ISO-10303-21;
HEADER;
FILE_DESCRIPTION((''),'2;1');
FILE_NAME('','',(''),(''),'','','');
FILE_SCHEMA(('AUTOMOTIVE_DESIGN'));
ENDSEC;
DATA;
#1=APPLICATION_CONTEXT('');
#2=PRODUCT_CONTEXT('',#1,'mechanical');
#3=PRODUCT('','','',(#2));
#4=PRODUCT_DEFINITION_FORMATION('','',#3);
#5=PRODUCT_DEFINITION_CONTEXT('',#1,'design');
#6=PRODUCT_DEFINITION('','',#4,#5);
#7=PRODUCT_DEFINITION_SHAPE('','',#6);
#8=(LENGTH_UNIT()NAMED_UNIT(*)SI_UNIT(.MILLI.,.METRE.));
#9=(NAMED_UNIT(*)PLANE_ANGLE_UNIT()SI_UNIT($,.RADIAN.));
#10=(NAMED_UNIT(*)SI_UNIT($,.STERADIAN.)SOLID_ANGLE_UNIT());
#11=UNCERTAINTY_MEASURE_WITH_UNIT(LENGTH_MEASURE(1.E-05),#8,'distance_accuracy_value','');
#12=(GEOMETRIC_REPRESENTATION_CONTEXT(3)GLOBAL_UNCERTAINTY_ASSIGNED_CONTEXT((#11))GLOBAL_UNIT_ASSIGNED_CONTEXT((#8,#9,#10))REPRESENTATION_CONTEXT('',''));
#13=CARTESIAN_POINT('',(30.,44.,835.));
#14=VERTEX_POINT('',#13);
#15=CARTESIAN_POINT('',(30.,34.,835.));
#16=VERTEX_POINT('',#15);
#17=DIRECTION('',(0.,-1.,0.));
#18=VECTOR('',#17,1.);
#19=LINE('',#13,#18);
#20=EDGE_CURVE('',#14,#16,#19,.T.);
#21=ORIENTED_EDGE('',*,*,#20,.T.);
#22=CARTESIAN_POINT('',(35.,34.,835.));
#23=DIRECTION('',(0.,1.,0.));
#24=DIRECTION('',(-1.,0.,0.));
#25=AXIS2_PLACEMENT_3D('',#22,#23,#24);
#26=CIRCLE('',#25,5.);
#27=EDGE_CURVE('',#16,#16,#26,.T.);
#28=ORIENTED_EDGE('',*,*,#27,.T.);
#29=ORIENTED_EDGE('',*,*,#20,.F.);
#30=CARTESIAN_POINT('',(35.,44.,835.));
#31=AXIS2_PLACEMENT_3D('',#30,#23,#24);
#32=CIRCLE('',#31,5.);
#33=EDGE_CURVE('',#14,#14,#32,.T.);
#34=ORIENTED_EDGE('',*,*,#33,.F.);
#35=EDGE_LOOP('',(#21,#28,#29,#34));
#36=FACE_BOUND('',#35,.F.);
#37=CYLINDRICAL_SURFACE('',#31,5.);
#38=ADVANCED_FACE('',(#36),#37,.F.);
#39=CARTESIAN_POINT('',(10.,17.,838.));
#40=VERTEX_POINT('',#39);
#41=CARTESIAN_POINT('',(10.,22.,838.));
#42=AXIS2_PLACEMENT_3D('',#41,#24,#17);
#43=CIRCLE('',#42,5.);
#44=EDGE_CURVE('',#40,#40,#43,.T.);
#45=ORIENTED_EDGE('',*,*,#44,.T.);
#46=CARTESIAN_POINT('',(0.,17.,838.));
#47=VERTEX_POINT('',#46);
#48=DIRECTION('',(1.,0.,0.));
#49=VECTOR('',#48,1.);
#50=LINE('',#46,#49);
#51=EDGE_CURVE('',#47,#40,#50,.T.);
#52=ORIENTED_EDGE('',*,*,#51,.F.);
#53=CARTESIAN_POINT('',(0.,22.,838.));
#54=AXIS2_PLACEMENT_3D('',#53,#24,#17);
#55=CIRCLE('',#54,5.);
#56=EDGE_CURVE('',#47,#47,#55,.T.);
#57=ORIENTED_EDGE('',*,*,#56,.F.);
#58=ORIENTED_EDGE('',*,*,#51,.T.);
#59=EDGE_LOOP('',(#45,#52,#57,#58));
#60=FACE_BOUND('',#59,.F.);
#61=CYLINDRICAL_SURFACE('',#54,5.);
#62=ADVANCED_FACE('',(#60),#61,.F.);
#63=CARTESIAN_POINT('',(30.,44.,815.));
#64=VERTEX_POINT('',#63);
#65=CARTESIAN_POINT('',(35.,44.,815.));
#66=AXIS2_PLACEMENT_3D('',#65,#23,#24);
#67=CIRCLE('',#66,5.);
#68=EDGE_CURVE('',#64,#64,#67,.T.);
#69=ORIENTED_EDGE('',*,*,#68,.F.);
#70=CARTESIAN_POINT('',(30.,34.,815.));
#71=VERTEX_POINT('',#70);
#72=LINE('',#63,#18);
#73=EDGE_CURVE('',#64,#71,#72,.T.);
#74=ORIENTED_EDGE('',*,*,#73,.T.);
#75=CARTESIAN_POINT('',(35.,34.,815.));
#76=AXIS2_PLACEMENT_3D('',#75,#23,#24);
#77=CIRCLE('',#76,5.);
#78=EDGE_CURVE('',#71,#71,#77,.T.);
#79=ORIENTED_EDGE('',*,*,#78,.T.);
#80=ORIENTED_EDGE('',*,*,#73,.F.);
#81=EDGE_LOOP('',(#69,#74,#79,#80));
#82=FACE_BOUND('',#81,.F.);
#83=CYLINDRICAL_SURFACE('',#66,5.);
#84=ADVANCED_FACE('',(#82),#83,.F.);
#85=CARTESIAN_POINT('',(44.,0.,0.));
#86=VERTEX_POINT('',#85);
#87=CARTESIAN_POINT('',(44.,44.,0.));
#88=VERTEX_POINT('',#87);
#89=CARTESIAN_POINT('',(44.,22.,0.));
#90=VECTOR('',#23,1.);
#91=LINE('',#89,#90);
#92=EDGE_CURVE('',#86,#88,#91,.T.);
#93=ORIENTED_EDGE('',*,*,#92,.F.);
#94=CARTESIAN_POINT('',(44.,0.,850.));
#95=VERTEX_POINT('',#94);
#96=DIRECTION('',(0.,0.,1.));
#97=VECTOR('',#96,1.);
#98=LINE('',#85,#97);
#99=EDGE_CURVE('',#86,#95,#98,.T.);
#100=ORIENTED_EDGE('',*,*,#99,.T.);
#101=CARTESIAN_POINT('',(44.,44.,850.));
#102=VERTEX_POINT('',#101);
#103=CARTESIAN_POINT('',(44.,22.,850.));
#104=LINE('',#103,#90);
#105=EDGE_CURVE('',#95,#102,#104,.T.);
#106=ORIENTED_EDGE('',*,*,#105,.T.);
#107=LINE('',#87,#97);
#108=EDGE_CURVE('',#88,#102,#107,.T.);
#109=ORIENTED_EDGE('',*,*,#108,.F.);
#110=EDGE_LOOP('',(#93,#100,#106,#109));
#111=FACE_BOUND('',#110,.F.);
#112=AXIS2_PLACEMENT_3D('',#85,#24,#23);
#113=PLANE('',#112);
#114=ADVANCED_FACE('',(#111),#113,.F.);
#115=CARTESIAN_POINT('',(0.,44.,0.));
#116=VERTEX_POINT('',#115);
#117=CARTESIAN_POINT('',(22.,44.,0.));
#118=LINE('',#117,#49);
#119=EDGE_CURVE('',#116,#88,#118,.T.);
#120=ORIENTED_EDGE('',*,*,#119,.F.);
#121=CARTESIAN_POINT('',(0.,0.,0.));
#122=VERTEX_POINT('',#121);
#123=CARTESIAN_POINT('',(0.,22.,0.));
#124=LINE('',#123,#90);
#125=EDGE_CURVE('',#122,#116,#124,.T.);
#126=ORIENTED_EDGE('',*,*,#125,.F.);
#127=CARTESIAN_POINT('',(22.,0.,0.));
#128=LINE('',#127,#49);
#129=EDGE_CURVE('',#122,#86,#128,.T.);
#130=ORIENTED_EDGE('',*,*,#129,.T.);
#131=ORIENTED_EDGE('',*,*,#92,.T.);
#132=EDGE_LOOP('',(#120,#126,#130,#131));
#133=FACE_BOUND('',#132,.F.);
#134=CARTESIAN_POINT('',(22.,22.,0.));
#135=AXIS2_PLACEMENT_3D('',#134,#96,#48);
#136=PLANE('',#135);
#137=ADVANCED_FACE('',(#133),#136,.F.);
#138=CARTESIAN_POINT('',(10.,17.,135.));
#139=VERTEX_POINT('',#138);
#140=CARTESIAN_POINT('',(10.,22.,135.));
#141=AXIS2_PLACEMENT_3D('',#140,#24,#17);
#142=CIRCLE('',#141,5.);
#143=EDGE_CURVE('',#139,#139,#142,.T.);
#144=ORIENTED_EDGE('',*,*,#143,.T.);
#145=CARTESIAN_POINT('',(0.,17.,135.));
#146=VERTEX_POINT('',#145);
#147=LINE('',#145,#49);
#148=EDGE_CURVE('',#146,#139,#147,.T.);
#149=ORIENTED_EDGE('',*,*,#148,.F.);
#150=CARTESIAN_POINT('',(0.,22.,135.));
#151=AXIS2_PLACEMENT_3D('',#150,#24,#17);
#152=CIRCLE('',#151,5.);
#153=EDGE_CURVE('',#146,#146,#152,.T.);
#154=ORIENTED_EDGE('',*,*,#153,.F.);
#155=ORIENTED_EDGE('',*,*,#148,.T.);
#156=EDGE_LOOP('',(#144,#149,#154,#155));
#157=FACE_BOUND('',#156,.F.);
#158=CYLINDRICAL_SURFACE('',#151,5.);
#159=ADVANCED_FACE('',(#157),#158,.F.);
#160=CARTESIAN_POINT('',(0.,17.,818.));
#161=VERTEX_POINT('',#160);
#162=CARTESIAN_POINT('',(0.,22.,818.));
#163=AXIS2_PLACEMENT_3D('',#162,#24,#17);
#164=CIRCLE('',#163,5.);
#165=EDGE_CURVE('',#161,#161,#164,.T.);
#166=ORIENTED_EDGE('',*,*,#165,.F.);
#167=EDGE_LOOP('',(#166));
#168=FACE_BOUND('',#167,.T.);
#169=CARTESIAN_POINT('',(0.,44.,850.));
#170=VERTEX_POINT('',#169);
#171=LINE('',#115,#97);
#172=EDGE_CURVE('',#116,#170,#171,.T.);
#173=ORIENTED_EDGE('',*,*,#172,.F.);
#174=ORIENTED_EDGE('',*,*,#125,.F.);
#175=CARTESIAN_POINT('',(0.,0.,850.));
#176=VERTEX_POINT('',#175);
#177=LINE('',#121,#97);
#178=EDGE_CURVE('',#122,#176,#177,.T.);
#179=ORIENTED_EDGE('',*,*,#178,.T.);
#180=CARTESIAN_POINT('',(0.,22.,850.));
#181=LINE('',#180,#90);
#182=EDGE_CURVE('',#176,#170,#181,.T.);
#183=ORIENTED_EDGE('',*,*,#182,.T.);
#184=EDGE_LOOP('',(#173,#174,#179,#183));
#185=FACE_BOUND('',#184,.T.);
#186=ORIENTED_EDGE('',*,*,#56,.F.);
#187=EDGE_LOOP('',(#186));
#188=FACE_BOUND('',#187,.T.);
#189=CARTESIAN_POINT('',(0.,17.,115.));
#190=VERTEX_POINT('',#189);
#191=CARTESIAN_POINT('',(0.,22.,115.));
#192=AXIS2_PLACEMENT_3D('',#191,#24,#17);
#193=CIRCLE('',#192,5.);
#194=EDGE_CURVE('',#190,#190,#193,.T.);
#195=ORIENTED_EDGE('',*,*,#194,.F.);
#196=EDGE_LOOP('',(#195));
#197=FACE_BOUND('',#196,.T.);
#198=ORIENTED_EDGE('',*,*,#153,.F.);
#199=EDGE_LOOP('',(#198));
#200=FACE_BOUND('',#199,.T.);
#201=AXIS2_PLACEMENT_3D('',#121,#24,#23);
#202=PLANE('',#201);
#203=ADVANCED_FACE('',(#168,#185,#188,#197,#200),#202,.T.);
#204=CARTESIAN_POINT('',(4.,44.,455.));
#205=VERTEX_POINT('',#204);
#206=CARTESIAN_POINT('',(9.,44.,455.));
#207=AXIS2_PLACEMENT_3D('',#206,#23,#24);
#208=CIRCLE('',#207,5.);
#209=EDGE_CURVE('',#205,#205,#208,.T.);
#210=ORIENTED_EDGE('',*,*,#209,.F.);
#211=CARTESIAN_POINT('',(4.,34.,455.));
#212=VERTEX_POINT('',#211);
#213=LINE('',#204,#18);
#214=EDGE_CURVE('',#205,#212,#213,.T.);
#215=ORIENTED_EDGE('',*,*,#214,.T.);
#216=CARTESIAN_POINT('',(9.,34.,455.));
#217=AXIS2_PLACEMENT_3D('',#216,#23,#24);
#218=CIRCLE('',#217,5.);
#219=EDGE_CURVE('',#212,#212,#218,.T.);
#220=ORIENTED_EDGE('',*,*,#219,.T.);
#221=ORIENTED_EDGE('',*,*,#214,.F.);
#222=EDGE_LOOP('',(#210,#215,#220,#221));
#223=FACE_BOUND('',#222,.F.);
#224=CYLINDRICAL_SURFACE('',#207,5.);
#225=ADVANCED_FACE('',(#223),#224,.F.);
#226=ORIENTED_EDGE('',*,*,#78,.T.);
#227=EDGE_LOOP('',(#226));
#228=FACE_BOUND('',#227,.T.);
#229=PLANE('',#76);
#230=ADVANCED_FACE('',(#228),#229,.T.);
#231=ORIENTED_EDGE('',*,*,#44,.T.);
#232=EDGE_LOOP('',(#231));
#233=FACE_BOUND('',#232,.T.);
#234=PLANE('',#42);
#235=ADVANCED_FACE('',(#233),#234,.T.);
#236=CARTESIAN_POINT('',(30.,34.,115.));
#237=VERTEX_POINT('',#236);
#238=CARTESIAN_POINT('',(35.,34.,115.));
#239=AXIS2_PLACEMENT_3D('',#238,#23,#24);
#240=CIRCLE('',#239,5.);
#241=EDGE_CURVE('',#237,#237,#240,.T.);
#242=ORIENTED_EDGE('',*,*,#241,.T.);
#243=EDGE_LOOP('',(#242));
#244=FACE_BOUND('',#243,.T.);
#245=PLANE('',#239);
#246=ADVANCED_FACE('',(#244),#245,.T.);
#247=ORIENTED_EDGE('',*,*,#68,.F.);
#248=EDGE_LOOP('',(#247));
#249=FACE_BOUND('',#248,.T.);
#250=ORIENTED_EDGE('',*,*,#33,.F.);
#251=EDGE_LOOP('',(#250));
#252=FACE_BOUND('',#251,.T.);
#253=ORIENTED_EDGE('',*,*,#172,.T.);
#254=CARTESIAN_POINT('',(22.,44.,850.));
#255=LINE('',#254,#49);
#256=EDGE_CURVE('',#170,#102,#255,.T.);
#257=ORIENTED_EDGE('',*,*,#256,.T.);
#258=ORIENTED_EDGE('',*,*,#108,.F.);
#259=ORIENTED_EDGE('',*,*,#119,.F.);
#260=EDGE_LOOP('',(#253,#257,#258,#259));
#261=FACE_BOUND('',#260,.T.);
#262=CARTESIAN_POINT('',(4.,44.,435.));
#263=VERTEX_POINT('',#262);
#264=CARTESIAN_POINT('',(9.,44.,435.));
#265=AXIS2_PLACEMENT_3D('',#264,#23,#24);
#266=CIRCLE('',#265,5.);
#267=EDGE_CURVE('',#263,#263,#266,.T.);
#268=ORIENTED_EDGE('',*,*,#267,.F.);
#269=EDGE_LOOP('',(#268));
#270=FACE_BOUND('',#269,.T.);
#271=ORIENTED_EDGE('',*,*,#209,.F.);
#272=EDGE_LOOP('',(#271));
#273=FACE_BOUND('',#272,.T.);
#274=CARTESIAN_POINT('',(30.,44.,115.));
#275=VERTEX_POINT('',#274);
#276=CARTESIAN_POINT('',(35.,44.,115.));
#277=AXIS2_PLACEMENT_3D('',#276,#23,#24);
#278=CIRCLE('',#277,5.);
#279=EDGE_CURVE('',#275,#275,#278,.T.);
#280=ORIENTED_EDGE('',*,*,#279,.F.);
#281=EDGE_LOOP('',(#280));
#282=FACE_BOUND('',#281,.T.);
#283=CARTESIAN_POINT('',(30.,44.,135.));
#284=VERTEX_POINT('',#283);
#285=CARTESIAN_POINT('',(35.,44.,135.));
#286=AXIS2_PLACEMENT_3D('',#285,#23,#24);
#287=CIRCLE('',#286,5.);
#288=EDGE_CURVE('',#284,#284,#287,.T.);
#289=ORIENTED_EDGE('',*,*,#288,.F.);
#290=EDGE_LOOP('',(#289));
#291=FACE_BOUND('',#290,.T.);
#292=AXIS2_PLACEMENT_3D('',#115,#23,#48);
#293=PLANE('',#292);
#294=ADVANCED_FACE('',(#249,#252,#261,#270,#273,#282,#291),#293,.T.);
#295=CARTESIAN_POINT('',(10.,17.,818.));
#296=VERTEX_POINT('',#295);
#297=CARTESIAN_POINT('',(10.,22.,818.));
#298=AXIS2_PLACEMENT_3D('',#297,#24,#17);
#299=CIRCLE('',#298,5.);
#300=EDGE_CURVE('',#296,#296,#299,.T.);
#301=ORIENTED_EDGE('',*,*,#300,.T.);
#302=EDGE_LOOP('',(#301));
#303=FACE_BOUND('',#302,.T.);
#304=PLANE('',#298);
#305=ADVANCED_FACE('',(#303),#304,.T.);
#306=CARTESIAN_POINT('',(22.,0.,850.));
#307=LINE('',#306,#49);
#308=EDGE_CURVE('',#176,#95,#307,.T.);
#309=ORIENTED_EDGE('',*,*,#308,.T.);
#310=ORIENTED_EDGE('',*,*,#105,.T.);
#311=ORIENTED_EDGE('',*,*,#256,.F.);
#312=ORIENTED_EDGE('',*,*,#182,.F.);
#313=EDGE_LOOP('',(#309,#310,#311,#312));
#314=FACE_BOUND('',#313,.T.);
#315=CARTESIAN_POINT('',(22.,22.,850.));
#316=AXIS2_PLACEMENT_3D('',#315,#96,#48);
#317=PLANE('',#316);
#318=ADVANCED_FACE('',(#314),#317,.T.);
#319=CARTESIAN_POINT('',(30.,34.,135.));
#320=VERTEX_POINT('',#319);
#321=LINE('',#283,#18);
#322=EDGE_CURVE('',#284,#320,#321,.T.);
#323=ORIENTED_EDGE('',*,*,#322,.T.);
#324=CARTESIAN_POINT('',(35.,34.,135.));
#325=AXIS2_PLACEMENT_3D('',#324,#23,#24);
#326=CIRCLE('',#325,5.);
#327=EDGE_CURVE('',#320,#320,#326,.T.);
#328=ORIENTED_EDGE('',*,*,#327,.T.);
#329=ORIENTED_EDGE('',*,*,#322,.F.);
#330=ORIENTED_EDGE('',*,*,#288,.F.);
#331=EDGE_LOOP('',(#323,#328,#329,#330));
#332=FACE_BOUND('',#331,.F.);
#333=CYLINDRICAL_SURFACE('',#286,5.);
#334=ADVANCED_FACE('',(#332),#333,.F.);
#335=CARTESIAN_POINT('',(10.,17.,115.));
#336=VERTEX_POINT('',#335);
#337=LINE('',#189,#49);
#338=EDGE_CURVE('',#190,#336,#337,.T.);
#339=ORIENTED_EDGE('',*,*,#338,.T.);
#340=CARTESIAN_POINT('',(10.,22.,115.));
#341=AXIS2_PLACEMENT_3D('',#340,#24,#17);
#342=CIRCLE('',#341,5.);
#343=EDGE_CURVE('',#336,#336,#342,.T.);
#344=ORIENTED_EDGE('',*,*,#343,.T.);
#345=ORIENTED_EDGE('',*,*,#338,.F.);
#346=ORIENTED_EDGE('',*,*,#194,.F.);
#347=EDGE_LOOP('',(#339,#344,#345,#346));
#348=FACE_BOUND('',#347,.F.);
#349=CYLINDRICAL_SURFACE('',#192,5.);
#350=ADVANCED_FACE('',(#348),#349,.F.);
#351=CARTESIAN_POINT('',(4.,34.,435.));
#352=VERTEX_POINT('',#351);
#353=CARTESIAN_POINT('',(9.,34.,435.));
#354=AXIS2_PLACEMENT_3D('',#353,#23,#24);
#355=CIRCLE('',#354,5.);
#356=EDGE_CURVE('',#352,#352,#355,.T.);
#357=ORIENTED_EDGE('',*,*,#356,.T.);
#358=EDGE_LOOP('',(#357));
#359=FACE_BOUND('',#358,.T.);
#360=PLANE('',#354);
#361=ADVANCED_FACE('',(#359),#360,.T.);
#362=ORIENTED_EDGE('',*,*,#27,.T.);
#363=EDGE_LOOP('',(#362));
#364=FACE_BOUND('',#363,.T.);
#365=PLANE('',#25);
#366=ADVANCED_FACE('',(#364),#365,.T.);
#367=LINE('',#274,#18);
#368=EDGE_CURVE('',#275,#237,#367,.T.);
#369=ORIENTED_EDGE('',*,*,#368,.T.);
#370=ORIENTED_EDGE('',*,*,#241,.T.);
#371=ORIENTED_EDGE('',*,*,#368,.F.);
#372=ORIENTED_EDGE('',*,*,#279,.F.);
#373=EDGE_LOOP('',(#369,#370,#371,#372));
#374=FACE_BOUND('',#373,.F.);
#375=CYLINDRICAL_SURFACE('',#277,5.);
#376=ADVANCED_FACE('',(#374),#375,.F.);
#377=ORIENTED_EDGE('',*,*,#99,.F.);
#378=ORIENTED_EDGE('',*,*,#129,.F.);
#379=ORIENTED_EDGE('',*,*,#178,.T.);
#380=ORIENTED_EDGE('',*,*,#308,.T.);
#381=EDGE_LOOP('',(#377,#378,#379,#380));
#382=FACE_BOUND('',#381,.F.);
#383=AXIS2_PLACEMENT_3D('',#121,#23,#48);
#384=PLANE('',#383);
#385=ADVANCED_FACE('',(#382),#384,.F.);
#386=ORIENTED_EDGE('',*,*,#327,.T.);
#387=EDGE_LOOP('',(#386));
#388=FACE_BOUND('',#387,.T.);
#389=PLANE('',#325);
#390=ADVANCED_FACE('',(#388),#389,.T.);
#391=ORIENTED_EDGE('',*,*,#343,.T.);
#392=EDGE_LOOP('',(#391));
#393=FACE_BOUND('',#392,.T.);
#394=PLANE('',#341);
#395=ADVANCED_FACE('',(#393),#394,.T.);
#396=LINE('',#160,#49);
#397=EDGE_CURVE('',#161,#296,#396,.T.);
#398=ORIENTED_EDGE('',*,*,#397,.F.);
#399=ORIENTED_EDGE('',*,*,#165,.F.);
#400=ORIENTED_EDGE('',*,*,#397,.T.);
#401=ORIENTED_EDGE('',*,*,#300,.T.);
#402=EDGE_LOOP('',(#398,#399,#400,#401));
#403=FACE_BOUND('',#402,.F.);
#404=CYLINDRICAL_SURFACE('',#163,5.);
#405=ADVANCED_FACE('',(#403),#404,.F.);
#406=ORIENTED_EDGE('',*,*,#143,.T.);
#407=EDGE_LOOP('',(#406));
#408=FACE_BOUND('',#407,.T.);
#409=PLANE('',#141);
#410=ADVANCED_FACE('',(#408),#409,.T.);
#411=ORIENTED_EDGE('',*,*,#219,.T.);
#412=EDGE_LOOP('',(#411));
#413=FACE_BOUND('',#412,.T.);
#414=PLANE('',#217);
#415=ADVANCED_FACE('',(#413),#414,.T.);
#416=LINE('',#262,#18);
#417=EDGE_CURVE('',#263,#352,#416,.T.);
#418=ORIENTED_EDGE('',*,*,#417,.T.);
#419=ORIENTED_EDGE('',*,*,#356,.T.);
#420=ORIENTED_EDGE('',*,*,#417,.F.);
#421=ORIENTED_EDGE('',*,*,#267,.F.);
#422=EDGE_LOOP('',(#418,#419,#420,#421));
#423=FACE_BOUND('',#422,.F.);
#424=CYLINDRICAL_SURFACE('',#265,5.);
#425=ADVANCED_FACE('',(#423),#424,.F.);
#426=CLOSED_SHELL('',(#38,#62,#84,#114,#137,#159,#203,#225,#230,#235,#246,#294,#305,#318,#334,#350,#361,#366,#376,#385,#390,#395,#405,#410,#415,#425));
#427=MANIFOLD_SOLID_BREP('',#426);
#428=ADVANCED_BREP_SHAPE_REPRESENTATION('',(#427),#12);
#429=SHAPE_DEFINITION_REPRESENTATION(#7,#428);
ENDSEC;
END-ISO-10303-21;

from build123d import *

# Parameters (mm, degrees)
F0_W     = 44
F0_H     = 44
F1_DEPTH = 850
F2_R     = 5
F3_DEPTH = 10
F4_R     = 5
F5_DEPTH = 10


# Not quite as in the source:
# - a feature names something its author has since deleted; it is built from what else it names


with BuildPart() as f1:
    # F0 (on Top) → F1 (new body)
    with BuildSketch(Plane.XY):
        with Locations((22, 22)):
            Rectangle(F0_W, F0_H)
    extrude(amount=F1_DEPTH)

    # F2 (on face) → F3 (cut)
    with BuildSketch(Plane(origin=(0, 44, 0), x_dir=(-1, 0, 0), z_dir=(0, 1, 0))):
        with Locations((-35, 115)):
            Circle(F2_R)
        with Locations((-35, 135)):
            Circle(F2_R)
        with Locations((-9, 435)):
            Circle(F2_R)
        with Locations((-35, 835)):
            Circle(F2_R)
        with Locations((-35, 815)):
            Circle(F2_R)
        with Locations((-9, 455)):
            Circle(F2_R)
    extrude(amount=-F3_DEPTH, mode=Mode.SUBTRACT)

    # F4 (on face) → F5 (cut)
    with BuildSketch(Plane(origin=(0, 0, 0), x_dir=(0, -1, 0), z_dir=(-1, 0, 0))):
        with Locations((-22, 135)):
            Circle(F4_R)
        with Locations((-22, 115)):
            Circle(F4_R)
        with Locations((-22, 838)):
            Circle(F4_R)
        with Locations((-22, 818)):
            Circle(F4_R)
    extrude(amount=-F5_DEPTH, mode=Mode.SUBTRACT)


solid = f1.part
